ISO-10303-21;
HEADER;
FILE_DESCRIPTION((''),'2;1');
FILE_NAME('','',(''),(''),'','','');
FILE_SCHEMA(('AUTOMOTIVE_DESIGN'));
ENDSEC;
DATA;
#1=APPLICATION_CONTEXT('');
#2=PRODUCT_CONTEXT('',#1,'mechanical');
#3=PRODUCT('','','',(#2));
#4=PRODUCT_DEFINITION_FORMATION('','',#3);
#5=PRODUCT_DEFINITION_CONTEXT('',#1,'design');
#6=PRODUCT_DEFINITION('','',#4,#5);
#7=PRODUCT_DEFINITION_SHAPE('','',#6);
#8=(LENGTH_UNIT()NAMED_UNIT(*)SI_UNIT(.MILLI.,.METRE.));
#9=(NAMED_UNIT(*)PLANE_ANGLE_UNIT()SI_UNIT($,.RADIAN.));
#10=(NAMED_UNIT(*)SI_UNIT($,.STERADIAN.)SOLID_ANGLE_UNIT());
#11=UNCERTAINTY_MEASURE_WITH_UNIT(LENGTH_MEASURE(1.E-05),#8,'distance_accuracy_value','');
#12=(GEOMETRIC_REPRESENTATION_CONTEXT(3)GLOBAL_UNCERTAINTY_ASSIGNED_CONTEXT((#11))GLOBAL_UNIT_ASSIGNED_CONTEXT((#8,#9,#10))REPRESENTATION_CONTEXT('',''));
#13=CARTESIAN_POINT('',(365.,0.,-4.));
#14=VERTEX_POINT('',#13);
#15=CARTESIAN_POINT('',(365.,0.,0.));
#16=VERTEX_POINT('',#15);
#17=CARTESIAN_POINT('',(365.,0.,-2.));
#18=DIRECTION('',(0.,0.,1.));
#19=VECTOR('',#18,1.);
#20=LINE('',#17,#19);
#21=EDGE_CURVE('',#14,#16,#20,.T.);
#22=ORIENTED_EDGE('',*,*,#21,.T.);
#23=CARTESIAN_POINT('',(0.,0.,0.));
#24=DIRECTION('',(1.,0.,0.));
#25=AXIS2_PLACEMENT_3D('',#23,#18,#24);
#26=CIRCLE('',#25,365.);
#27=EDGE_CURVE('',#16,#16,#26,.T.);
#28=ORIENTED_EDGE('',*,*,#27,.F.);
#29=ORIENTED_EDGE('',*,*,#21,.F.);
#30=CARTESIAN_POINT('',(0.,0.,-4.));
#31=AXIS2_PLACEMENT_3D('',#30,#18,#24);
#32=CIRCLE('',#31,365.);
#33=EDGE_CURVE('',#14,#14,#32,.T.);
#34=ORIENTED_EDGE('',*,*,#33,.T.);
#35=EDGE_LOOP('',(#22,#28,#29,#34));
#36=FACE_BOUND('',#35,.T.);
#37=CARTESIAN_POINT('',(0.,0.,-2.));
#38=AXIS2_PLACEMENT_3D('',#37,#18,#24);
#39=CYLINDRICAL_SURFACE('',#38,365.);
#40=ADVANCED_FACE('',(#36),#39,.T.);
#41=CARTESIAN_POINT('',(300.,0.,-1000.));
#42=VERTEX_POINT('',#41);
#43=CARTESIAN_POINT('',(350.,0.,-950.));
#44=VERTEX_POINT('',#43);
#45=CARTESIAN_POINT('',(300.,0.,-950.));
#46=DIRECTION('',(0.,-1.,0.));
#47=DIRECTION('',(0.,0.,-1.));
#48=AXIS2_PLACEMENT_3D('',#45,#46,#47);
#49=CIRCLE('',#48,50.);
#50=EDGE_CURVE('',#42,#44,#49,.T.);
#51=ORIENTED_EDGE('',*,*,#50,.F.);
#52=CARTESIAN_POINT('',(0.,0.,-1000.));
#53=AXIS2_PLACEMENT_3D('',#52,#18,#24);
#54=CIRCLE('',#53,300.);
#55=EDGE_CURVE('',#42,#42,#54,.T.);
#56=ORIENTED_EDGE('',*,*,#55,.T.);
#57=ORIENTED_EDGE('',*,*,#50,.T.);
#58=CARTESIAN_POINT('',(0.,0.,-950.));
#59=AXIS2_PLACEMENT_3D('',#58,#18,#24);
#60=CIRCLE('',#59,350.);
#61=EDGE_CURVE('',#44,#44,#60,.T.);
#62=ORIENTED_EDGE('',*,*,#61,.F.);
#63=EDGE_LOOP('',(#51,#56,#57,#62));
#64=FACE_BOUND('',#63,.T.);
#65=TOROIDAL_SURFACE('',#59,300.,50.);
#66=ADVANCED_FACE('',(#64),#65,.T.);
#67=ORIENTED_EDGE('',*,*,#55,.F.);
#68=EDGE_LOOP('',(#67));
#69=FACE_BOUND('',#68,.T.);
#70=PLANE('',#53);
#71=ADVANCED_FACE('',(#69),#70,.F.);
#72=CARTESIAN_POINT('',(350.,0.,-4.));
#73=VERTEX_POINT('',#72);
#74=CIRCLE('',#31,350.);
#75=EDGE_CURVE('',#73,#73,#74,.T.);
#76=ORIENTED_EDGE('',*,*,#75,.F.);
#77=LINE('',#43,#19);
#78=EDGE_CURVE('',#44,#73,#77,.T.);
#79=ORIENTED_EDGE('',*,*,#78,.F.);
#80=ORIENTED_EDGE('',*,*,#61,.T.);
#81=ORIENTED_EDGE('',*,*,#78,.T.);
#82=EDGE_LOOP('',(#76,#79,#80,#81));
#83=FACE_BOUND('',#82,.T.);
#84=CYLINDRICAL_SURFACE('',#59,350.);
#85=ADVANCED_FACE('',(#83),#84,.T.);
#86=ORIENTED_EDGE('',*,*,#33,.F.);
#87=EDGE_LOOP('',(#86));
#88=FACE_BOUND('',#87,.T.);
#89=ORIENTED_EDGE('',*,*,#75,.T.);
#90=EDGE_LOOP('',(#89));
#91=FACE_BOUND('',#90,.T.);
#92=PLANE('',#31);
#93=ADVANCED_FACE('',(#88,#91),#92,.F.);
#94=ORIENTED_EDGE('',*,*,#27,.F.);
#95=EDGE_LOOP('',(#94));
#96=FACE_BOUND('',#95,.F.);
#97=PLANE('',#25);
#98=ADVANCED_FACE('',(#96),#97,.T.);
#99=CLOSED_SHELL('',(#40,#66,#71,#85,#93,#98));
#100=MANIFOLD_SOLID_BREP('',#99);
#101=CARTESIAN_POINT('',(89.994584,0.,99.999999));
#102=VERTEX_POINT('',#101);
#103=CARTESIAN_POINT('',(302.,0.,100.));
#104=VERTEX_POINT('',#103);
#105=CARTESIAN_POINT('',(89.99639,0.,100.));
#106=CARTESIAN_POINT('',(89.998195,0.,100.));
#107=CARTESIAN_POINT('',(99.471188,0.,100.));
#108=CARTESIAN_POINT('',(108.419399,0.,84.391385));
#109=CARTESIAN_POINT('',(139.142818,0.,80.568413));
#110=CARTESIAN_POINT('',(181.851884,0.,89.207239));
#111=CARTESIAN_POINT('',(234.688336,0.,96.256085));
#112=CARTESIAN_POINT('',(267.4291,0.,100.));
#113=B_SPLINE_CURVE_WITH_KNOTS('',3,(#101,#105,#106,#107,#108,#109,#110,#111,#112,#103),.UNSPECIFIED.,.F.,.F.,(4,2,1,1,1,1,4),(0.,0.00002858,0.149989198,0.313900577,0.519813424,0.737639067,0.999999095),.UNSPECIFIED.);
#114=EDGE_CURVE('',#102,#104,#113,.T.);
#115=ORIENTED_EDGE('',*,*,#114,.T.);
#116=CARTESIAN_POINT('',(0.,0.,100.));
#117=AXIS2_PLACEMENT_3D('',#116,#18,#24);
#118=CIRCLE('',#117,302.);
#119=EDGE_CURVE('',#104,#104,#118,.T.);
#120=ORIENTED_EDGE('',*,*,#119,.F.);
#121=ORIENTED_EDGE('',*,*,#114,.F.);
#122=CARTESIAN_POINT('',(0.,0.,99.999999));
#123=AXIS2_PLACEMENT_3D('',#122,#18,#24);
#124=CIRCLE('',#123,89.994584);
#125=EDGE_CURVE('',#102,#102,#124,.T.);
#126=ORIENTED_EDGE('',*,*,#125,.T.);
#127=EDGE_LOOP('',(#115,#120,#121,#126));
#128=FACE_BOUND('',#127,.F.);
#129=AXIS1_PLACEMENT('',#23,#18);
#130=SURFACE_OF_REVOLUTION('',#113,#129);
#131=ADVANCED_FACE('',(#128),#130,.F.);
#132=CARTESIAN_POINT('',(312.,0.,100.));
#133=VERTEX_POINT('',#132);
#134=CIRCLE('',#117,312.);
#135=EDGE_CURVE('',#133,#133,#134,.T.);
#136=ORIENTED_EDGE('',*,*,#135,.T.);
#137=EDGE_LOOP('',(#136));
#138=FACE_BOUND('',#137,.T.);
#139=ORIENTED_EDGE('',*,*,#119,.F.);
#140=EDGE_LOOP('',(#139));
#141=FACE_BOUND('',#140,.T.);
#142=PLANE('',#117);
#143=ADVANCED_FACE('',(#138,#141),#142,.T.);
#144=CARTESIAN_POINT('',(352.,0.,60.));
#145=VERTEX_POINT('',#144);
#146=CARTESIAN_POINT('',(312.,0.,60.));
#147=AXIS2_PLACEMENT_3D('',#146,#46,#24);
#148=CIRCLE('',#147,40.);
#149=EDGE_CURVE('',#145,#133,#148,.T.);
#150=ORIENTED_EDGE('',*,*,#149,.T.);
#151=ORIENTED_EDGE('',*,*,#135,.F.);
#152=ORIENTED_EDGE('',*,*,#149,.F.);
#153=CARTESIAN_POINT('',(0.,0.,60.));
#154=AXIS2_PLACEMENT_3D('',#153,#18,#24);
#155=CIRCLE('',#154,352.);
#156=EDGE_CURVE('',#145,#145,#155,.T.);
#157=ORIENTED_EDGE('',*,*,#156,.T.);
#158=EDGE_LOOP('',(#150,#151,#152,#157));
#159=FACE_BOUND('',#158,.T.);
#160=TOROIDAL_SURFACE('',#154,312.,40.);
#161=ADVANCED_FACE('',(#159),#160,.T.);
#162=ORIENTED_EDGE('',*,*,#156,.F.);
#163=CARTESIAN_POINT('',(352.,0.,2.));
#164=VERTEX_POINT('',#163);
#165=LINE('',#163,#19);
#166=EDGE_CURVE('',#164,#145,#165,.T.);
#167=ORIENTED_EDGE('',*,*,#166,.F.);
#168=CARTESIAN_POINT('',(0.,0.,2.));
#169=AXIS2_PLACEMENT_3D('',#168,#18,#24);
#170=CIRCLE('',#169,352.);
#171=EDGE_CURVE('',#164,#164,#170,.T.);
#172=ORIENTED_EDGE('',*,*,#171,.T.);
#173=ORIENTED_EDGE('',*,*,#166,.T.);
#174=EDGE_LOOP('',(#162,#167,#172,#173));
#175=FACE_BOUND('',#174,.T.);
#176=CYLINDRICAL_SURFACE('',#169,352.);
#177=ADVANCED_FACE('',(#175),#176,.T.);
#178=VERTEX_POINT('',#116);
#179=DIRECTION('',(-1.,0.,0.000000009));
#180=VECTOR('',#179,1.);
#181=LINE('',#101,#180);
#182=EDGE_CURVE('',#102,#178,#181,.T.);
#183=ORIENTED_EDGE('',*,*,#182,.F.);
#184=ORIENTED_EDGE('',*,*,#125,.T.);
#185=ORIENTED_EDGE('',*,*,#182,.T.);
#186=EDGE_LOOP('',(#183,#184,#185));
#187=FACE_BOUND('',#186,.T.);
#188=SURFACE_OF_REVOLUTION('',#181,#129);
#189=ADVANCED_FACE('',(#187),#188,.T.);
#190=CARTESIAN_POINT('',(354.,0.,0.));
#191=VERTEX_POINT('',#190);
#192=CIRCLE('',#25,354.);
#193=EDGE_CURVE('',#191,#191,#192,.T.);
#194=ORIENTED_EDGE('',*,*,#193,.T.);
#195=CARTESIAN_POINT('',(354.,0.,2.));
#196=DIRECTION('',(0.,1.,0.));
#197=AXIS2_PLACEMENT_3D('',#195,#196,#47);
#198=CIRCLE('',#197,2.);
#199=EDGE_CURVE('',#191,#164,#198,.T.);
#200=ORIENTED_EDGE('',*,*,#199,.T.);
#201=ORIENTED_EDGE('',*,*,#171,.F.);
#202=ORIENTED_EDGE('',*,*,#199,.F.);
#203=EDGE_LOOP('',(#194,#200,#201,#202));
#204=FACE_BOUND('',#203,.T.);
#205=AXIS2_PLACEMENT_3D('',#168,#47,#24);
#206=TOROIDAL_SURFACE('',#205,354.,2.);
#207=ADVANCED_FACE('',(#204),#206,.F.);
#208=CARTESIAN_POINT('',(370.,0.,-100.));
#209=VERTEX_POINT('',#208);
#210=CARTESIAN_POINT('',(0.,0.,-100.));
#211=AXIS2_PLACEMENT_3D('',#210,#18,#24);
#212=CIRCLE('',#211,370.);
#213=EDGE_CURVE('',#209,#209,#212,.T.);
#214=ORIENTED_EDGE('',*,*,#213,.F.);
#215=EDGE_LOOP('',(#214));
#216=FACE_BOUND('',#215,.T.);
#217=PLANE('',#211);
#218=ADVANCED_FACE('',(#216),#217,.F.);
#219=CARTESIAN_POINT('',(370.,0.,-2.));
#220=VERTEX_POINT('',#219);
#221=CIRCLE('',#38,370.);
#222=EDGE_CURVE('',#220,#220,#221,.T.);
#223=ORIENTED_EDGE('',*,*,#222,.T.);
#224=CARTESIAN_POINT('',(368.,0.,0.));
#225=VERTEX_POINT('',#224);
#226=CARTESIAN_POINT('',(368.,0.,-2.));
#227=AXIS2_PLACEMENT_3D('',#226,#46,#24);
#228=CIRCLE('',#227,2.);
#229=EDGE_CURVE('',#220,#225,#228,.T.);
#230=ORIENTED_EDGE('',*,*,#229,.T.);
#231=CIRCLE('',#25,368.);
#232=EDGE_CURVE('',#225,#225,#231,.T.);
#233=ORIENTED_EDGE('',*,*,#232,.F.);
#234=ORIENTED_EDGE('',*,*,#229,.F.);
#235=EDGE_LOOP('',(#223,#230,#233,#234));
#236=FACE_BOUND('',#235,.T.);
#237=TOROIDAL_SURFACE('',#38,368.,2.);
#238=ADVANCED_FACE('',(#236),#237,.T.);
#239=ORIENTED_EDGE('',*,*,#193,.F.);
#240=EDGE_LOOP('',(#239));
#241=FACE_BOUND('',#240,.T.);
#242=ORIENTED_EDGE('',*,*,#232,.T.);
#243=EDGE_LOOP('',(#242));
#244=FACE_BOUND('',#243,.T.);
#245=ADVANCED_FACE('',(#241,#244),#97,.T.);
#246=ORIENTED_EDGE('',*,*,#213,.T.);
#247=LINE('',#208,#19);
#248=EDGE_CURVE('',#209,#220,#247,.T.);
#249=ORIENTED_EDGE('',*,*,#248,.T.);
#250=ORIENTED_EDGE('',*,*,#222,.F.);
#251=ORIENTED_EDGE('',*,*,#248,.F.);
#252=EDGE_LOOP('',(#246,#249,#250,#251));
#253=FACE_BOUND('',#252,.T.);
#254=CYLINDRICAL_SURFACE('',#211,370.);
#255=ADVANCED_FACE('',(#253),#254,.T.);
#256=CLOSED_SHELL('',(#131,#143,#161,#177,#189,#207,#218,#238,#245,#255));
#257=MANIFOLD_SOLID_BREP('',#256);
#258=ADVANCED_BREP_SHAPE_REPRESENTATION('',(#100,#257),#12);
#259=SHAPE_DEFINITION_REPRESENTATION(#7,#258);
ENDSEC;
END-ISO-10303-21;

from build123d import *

# Parameters (mm, degrees)
F2_W = 15
F2_H = 4


# Not quite as in the source:
# - ends of sketch curves that miss each other by under 0.0002 mm in the source are joined


with BuildPart() as f1:
    # F0 (on Front) → F1 (revolve)
    with BuildSketch(Plane.XZ):
        with BuildLine():
            Line((350, -950), (350, 0))
            Line((350, 0), (0, 0))
            Line((0, 0), (0, -1000))
            Line((0, -1000), (300, -1000))
            ThreePointArc((300, -1000), (335.3553390593, -985.3553390593), (350, -950))
        make_face()
    revolve(axis=Axis((0, 0, -563.781440258), (0, 0, 1)))

    # F2 (on Front) → F3 (revolve)
    with BuildSketch(Plane.XZ):
        with Locations((357.5, -2)):
            Rectangle(F2_W, F2_H)
    revolve(axis=Axis((0, 0, -500), (0, 0, 1)))


with BuildPart() as f5:
    # F4 (on Front) → F5 (revolve)
    with BuildSketch(Plane.XZ):
        with BuildLine():
            Line((368, 0), (354, 0))
            ThreePointArc((354, 0), (352.5857864376, 0.5857864376), (352, 2))
            Line((352, 2), (352, 60))
            ThreePointArc((352, 60), (340.2842712475, 88.2842712475), (312, 100))
            Line((312, 100), (302, 100))
            add(Edge.make_bspline(
                [(90, 100), (99.4711880321, 100), (108.4193994424, 84.3913848943), (139.1428176435, 80.5684134054), (181.851883894, 89.2072392235), (234.6883361244, 96.2560851887), (267.4291003084, 100), (302, 100)],
                knots=[2.85798e-05, 2.85798e-05, 2.85798e-05, 2.85798e-05, 0.1499893339, 0.3139008613, 0.5198138943, 0.7376397347, 1, 1, 1, 1], degree=3))
            add(Edge.make_bspline(
                [(89.994584319, 99.9999991873), (89.9963897347, 99.9999997291), (89.9981949617, 100), (90, 100)],
                knots=[0, 0, 0, 0, 2.85798e-05, 2.85798e-05, 2.85798e-05, 2.85798e-05], degree=3))
            Line((89.994584319, 99.9999991873), (0, 100))
            Line((0, 100), (0, -100))
            Line((0, -100), (370, -100))
            Line((370, -100), (370, -2))
            ThreePointArc((370, -2), (369.4142135624, -0.5857864376), (368, 0))
        make_face()
    revolve(axis=Axis((0, 0, 0), (0, 0, 1)))


solid = Compound([f1.part, f5.part])
